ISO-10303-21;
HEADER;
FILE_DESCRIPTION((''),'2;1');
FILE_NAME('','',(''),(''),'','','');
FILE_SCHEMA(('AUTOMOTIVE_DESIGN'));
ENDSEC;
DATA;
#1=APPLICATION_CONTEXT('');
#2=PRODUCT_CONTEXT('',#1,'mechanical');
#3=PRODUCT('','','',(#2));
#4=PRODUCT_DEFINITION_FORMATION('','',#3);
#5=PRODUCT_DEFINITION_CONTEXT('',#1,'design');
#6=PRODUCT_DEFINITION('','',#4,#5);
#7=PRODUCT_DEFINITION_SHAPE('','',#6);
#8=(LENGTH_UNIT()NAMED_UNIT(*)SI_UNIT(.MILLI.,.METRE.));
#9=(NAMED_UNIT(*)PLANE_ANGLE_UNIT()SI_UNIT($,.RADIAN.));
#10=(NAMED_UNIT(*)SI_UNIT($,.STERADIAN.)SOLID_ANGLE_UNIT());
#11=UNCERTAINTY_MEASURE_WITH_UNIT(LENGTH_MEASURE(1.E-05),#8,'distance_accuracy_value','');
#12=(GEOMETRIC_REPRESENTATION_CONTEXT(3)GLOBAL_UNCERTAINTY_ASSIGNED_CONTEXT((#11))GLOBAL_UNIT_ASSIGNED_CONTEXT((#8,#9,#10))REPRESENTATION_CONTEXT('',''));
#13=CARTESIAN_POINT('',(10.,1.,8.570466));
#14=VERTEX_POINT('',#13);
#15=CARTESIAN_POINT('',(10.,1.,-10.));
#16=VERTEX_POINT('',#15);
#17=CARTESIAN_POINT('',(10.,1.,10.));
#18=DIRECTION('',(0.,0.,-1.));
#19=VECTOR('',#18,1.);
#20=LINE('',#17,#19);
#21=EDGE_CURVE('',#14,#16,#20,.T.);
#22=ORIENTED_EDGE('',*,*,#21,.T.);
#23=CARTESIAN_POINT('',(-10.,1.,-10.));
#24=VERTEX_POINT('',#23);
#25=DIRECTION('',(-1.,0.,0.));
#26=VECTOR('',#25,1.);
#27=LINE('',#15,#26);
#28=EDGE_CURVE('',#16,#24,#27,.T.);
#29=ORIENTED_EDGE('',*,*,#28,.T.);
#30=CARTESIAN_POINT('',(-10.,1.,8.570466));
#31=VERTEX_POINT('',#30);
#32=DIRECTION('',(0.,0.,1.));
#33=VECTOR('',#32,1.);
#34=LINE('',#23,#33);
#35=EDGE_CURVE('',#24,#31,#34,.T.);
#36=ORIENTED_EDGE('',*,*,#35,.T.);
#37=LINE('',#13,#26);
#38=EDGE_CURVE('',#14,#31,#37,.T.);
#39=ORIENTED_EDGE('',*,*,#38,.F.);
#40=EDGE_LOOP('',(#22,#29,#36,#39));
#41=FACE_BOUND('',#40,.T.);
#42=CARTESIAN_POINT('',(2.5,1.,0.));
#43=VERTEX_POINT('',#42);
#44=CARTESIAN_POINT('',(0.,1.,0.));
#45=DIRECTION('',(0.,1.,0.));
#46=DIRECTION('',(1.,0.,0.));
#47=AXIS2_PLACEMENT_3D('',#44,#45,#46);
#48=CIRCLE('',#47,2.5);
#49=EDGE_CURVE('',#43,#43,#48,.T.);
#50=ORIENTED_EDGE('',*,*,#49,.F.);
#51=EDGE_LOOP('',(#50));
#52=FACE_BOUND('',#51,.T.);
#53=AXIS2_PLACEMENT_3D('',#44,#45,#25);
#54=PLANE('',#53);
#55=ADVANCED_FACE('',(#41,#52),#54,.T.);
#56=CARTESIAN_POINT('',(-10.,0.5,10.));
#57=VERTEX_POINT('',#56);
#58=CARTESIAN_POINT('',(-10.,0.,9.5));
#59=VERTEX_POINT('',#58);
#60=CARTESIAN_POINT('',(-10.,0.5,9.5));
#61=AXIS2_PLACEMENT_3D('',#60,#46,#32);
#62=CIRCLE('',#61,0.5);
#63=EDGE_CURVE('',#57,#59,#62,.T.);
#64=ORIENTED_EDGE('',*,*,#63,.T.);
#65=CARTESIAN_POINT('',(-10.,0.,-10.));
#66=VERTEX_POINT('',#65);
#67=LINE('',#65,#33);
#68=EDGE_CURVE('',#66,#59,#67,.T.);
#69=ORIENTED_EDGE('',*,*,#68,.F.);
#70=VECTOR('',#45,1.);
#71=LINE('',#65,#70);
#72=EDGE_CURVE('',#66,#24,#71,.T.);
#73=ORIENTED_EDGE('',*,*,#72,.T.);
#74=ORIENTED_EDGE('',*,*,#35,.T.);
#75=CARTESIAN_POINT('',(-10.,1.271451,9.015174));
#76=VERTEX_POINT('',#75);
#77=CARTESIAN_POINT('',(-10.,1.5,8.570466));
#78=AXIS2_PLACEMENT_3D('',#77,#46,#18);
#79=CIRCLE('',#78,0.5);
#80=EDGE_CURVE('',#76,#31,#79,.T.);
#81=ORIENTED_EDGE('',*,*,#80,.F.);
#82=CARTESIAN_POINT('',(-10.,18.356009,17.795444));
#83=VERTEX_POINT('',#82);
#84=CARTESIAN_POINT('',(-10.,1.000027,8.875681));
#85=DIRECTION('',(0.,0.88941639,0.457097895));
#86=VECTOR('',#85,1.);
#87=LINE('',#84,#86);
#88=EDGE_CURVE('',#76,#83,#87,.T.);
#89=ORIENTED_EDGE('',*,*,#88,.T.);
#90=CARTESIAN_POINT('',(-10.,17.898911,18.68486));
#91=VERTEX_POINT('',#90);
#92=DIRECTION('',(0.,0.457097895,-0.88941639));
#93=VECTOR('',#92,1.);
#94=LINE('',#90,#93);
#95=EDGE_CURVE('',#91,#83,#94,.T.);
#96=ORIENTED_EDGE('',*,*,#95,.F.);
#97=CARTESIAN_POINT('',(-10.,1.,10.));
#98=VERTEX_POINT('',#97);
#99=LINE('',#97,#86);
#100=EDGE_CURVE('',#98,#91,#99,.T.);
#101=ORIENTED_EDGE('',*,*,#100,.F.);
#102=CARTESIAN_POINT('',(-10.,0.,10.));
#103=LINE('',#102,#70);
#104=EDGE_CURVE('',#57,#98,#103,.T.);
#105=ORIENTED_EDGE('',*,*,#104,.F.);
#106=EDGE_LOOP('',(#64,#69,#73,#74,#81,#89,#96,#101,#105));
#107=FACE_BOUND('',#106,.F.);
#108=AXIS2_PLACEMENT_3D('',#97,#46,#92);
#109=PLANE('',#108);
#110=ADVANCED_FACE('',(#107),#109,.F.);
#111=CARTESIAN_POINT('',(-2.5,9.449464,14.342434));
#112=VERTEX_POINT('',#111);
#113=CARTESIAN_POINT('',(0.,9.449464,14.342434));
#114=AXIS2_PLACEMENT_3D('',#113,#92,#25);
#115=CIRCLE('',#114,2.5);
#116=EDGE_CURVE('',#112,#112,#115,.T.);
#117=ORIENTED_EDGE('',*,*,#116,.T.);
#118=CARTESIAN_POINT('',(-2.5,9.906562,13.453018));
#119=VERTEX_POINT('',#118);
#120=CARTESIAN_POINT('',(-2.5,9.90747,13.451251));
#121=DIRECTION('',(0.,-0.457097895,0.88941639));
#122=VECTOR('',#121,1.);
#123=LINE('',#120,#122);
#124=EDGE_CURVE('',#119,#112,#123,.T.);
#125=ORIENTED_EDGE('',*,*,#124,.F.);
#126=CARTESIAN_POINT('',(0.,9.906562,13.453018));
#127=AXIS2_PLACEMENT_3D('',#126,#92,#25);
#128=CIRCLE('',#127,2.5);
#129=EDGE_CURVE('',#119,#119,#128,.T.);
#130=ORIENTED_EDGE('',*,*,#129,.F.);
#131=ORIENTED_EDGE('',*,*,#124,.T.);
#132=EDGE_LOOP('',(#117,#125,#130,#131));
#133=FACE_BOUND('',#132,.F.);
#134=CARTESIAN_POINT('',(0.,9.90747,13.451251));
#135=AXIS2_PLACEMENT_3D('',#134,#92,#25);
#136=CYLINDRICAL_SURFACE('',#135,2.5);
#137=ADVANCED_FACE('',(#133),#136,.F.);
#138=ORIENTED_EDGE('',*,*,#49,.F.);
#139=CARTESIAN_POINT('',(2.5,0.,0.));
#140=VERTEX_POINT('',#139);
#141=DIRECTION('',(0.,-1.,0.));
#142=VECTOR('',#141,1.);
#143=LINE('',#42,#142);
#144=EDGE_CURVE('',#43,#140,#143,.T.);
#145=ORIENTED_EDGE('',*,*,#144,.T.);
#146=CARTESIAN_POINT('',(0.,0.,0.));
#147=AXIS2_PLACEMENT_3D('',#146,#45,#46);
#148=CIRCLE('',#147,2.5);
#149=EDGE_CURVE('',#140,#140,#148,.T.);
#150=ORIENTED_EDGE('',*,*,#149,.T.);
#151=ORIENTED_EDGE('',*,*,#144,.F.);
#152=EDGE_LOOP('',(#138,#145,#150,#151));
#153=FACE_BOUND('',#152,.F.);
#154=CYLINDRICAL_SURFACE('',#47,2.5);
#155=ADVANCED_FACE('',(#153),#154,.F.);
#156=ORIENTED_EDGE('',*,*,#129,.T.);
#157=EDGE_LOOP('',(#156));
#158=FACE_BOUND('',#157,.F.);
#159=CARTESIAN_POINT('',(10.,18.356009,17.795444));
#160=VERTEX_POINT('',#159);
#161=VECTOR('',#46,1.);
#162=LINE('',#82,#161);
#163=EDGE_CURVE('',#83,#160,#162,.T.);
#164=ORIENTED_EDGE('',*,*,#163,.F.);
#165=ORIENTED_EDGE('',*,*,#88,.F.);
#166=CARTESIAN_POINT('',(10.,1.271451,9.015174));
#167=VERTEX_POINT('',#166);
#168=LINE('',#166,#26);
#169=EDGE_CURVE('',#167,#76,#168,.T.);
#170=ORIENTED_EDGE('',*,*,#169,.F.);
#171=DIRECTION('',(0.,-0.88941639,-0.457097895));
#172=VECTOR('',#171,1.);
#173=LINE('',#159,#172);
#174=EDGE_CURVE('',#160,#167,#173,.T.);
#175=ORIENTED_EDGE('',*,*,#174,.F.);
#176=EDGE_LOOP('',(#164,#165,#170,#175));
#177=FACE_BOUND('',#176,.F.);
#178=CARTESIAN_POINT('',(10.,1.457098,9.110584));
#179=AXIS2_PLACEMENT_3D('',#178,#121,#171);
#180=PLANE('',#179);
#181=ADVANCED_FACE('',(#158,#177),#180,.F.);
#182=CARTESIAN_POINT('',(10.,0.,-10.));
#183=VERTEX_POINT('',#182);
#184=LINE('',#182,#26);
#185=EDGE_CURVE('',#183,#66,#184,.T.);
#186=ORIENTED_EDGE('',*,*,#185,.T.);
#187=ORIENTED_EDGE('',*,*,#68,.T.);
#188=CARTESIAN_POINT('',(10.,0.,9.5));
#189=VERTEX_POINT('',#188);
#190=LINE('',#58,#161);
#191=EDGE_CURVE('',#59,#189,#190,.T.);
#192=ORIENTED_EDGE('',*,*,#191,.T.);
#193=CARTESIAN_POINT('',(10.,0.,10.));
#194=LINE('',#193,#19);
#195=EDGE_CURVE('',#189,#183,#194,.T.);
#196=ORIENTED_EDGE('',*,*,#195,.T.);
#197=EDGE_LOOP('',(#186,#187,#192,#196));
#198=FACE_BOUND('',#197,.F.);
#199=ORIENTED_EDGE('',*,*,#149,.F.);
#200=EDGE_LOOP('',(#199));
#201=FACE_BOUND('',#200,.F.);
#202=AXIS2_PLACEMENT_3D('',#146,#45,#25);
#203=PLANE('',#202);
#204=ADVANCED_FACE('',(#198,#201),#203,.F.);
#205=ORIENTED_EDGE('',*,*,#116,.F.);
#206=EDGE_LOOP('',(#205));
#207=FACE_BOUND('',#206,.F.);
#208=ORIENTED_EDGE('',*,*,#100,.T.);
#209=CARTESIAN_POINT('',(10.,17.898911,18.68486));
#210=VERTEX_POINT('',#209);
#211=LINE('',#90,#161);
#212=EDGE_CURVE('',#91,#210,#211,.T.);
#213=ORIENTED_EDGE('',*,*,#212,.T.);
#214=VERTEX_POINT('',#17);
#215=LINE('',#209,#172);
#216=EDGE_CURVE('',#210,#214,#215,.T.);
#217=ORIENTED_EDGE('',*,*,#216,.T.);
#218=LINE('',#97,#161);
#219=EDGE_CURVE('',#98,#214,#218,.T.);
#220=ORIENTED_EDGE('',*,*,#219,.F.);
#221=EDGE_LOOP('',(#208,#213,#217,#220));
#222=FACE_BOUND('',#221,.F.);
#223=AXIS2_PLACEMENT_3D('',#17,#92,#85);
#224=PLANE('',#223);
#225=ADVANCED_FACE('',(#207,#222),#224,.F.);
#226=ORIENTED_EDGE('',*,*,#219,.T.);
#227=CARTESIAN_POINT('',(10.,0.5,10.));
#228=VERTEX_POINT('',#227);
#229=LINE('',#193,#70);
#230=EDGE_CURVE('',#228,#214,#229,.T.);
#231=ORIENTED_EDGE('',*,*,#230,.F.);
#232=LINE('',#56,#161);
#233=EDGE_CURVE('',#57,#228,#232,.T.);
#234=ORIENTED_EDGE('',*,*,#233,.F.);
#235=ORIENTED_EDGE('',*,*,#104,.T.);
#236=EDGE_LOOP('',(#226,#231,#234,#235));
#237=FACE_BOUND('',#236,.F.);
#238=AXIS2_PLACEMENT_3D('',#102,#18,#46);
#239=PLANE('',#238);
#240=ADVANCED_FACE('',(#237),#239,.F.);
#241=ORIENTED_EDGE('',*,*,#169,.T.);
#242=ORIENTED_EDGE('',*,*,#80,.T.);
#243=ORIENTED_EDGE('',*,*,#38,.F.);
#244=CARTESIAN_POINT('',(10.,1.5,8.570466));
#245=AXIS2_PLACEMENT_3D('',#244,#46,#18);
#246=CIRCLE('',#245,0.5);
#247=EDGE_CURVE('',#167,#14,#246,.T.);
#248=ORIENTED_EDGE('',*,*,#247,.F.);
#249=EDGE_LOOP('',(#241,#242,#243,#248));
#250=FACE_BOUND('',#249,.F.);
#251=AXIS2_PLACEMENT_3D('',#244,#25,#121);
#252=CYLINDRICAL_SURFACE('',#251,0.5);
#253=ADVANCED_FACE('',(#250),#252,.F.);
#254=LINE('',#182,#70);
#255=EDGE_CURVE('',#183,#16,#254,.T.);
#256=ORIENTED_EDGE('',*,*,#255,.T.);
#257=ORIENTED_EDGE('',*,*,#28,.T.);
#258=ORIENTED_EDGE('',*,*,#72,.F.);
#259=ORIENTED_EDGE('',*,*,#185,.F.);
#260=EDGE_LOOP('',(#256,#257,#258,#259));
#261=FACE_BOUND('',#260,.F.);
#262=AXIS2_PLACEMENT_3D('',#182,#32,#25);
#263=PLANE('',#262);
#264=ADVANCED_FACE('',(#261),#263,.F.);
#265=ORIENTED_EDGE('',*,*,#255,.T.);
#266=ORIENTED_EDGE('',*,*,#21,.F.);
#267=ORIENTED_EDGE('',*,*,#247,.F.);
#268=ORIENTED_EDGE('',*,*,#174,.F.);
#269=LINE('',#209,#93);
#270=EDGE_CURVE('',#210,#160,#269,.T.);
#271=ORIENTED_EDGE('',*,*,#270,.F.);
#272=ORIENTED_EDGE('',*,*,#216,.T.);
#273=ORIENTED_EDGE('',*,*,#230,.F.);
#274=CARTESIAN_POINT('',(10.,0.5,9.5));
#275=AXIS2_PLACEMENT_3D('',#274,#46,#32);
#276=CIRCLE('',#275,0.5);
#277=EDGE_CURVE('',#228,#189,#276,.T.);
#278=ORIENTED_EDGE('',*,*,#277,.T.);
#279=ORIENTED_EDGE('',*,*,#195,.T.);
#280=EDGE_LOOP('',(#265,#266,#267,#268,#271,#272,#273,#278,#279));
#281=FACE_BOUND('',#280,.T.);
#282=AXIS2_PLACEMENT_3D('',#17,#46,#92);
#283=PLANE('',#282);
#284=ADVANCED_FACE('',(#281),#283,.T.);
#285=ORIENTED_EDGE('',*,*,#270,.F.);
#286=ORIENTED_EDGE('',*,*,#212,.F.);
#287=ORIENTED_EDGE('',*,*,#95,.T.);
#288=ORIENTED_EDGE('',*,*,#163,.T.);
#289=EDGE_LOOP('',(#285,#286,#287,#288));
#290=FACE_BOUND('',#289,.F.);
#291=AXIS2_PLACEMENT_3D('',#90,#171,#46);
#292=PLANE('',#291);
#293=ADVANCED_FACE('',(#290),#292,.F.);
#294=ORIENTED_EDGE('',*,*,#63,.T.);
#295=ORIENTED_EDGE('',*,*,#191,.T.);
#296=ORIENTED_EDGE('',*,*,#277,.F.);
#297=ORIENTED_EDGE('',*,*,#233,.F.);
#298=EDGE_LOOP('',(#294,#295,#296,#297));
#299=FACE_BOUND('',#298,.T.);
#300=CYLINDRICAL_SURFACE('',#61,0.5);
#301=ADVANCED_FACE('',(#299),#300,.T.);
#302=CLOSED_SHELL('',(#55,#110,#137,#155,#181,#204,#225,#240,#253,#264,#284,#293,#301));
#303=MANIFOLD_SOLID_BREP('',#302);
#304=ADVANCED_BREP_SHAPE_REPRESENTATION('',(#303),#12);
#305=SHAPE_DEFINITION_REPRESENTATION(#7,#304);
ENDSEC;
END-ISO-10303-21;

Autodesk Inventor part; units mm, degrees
ref_plane "YZ Plane" through (0, 0, 0) normal (1, 0, 0) x (0, 1, 0)
ref_plane "XZ Plane" through (0, 0, 0) normal (0, 1, 0) x (-1, 0, 0)
sketch "Sketch1" plane through (0, 0, 0) normal (0, 1, 0) x (-1, 0, 0)
  line L0 (-10, -10) -> (10, -10)
  line L1 (10, -10) -> (10, 10)
  line L2 (10, 10) -> (-10, 10)
  line L3 (-10, 10) -> (-10, -10)
  line L4 (-10, -10) -> (10, 10) construction
  line L5 (10, -10) -> (-10, 10) construction
  point P0 (0, 0)
  dimension "d0" = 20
  dimension "d1" = 20
extrude "Extrusion1" add sketch "Sketch1" along normal blind 1
sketch "Sketch3" plane through (10, 0, 10) normal (1, 0, 0) x (0, 0, -1)
  line L0 (20, 1) -> (0, 1) projected
  line L1 (0, 1) -> (-0.9142, 2.7788)
  line L2 (0, 1) -> (2, 1) construction
  point P0 (10, 0)
  dimension "d5" = 2
  dimension "d6" = 117.2
ref_plane "Work Plane1" through (10, 1, 10) normal (0, 0.4570979, -0.8894164) x (0, 0.8894164, 0.4570979)
sketch "Sketch4" plane through (10, 1, 10) normal (0, 0.4570979, -0.8894164) x (0, 0.8894164, 0.4570979)
  line L0 (-9.142, -20) -> (0, -20) projected
  line L1 (0, -20) -> (19, -20)
  line L2 (19, -20) -> (19, 0)
  line L3 (19, 0) -> (0, 0)
  line L4 (0, 0) -> (0, -20)
  point P0 (-5.4604, -10)
  dimension "d7" = 19
  dimension "d8" = 20
extrude "Extrusion2" add sketch "Sketch4" along normal blind 1
sketch "Sketch5" plane through (10, 1, 10) normal (1, 0, 0) x (0, 0.4570979, -0.8894164)
  line L0 (0, 0) -> (1, 0) projected
  line L1 (1, 0) -> (1, -0.5139)
  line L2 (17.7883, -9.142) -> (0, 0) projected
  line L3 (1, 0) -> (0, 0)
  line L4 (0, 0) -> (1, -0.5139)
  point P0 (8.4371, -5.4604)
extrude "Extrusion3" add sketch "Sketch5" against normal blind 20
fillet "Fillet1" radius 0.5 2 edges at (0, 1, 8.8757) (0, 0, 10)
sketch "Sketch6" plane through (0, 1, 0) normal (0, 1, 0) x (1, 0, 0)
  circle A0 centre (0, 0) radius 2.5
  dimension "d14" = 5
sketch "Sketch7" plane through (10, 1.4571, 9.1106) normal (0, 0.4570979, -0.8894164) x (-1, 0, 0)
  circle A0 centre (10, 9.5) radius 2.5
  point P0 (10, -5.4604)
  dimension "d15" = 5
extrude "Extrusion4" cut sketch "Sketch6" against normal blind 10
extrude "Extrusion5" cut sketch "Sketch7" against normal blind 10
properties part number "trail 17"
